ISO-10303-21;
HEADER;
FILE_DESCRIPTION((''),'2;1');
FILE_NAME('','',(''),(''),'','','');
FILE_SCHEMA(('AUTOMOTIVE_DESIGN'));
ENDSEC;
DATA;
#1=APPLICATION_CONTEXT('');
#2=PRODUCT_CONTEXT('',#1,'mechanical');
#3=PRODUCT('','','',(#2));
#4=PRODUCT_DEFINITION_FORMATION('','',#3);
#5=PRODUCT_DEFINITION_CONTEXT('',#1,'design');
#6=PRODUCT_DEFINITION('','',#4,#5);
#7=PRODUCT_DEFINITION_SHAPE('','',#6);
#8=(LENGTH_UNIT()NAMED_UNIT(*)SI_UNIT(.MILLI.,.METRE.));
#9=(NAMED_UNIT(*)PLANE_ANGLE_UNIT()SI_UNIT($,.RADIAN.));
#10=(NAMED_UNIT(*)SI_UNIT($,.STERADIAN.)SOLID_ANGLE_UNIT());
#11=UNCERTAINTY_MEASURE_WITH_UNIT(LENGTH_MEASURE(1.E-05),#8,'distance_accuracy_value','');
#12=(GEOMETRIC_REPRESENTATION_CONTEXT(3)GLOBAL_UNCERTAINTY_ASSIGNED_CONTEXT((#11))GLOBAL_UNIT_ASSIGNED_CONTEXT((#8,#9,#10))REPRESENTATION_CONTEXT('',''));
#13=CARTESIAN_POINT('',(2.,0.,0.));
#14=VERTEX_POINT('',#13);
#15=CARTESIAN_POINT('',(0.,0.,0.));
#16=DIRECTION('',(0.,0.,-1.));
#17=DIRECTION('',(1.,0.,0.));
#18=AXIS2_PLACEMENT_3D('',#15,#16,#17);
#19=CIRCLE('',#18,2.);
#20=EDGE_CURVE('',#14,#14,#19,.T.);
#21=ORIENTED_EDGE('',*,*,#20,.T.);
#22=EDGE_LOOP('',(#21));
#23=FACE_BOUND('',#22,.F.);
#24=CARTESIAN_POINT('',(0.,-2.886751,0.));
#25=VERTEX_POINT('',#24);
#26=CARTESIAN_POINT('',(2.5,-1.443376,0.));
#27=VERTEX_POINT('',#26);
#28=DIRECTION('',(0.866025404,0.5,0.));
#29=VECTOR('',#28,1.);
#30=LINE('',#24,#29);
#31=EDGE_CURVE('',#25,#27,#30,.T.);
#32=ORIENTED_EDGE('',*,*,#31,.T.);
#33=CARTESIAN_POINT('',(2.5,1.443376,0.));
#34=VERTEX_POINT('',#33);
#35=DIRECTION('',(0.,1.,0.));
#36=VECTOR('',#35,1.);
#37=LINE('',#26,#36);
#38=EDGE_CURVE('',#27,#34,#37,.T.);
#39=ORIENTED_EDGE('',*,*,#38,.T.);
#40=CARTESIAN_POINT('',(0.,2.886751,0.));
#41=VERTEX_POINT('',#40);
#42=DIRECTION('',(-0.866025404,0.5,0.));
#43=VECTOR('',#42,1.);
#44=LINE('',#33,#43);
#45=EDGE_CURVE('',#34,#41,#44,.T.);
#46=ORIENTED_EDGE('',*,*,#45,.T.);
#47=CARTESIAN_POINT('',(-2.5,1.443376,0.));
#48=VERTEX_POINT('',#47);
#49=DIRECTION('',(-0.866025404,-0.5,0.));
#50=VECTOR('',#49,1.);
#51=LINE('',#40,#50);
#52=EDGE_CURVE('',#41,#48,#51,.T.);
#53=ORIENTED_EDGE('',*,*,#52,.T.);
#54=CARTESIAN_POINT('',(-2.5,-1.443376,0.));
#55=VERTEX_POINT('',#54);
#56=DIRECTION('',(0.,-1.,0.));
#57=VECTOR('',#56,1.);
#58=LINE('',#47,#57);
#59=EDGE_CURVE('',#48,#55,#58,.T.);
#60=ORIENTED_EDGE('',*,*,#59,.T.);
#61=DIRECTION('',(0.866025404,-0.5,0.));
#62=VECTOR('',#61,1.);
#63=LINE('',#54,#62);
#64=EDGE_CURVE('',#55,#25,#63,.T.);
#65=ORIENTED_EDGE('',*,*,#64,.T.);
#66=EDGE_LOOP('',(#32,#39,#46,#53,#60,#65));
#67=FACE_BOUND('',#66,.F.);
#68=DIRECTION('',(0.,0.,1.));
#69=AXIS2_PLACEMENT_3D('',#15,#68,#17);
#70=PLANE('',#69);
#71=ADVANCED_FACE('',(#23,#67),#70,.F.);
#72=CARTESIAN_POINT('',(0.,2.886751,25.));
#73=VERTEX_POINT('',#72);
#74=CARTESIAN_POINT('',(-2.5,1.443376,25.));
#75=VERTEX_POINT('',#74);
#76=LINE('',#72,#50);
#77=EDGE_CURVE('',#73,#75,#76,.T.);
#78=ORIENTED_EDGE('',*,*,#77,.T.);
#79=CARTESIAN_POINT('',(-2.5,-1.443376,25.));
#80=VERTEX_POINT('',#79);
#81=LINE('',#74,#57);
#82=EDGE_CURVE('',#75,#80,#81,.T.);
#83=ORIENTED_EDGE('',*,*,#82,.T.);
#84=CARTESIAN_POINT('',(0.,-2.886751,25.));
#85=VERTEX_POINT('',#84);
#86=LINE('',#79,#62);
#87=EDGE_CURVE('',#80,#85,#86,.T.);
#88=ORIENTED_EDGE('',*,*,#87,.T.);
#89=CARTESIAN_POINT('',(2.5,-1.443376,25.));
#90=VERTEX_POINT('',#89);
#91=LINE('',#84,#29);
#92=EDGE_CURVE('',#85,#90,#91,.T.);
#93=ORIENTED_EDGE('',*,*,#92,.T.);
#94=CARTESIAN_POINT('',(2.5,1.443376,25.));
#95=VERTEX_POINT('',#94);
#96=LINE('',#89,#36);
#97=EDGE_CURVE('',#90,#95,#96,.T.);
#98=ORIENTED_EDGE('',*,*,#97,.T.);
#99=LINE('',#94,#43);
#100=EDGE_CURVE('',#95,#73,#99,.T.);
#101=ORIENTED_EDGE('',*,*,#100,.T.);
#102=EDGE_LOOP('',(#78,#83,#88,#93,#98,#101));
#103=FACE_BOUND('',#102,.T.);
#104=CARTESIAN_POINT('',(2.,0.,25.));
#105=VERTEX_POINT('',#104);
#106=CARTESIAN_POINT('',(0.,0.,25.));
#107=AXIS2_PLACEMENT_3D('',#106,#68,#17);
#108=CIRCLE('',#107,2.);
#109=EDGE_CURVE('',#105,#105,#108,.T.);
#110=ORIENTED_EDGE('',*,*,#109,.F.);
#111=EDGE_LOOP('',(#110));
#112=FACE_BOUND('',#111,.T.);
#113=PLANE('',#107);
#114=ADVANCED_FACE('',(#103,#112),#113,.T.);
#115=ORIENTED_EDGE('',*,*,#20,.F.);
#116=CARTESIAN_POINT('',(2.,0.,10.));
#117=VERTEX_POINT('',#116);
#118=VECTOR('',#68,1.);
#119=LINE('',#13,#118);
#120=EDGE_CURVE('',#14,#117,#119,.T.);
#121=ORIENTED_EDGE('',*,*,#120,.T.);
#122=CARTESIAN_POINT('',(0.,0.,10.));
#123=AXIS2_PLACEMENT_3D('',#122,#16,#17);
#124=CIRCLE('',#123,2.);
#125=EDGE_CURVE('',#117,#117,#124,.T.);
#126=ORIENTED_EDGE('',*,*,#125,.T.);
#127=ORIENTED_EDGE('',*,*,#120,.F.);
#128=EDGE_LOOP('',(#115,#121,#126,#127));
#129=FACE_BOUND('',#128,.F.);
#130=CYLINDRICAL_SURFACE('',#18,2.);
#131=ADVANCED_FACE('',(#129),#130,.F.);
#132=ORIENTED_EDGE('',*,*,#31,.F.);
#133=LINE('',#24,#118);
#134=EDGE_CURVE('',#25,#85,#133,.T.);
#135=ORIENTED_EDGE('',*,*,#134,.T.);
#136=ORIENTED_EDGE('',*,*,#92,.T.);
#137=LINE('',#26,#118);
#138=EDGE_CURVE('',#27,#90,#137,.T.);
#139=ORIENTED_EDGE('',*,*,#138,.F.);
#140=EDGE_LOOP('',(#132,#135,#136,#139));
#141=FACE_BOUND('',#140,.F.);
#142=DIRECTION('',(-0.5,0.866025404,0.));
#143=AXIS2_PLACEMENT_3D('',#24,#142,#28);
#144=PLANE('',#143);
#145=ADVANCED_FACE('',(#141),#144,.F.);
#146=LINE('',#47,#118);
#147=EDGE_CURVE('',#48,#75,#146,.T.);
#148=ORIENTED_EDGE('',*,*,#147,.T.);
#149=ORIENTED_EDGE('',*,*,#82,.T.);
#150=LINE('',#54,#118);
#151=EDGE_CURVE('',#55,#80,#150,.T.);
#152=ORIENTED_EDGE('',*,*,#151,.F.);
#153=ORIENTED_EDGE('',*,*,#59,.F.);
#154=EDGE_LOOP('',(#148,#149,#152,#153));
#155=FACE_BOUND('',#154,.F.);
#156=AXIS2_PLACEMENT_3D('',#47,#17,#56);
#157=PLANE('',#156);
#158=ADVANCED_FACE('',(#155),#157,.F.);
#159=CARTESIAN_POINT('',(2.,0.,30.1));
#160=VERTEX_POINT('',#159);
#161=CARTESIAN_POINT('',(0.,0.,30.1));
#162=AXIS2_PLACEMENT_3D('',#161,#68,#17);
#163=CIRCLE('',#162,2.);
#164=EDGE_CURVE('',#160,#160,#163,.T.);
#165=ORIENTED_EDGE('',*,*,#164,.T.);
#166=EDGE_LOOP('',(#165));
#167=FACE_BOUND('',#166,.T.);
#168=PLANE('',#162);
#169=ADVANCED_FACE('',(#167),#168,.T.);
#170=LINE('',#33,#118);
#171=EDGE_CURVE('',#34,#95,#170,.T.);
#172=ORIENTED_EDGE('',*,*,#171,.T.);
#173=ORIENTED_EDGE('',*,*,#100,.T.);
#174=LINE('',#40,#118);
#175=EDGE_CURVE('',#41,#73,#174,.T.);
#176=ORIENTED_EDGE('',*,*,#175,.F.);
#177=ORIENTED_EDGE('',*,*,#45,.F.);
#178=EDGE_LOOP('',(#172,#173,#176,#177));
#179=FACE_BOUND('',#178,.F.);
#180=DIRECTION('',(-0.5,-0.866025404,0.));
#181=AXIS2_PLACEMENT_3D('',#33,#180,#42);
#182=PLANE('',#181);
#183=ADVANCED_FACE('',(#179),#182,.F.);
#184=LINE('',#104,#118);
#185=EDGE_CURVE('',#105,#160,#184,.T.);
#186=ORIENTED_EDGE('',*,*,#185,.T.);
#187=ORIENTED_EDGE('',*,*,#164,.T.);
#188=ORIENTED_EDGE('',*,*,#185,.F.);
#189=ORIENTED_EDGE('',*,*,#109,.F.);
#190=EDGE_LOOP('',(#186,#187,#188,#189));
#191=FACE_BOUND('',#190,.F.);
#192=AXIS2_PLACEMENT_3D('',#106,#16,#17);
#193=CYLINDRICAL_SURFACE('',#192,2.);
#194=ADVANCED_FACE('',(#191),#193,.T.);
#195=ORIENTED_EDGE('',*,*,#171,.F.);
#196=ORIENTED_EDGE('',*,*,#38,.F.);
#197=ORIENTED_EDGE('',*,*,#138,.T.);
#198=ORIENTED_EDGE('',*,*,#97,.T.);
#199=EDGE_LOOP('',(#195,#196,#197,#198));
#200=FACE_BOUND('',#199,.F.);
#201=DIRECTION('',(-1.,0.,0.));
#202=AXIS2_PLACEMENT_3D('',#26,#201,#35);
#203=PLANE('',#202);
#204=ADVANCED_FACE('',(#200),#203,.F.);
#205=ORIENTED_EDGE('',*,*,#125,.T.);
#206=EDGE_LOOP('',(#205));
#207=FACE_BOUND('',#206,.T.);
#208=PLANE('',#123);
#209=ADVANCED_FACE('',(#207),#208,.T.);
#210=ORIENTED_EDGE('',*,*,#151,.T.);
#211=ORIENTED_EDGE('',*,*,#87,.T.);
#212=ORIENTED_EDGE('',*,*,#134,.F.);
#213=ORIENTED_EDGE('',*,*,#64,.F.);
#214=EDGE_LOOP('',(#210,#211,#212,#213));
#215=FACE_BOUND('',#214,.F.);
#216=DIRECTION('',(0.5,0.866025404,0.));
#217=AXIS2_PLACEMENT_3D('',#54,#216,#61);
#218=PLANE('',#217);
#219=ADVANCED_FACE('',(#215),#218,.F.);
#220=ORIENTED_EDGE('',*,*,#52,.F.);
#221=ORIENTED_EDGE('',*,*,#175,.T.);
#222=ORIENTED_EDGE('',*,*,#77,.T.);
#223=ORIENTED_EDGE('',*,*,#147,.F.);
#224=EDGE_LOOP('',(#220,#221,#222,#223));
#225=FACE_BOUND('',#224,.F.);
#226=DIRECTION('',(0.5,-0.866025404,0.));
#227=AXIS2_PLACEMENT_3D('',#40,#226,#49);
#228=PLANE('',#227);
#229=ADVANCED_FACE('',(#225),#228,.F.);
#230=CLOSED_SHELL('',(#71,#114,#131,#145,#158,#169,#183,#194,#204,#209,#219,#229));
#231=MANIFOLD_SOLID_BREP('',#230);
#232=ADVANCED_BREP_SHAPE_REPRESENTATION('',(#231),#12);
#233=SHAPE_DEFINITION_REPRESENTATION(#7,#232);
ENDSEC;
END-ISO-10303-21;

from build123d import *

# Parameters (mm, degrees)
F1_DEPTH = 25
F2_R     = 2
F3_DEPTH = 5.1
F4_R     = 2
F5_DEPTH = 10


with BuildPart() as f1:
    # F0 (on Top) → F1 (new body)
    with BuildSketch(Plane.XY):
        Polygon((2.5, 1.443375673), (0, 2.8867513459), (-2.5, 1.443375673), (-2.5, -1.443375673), (0, -2.8867513459), (2.5, -1.443375673), align=None)
    extrude(amount=F1_DEPTH)

    # F2 (on face) → F3 (join)
    with BuildSketch(Plane.XY.offset(25)):
        Circle(F2_R)
    extrude(amount=F3_DEPTH)

    # F4 (on face) → F5 (cut)
    with BuildSketch(Plane(origin=(0, 0, 0), x_dir=(1, 0, 0), z_dir=(0, 0, -1))):
        Circle(F4_R)
    extrude(amount=-F5_DEPTH, mode=Mode.SUBTRACT)


solid = f1.part
